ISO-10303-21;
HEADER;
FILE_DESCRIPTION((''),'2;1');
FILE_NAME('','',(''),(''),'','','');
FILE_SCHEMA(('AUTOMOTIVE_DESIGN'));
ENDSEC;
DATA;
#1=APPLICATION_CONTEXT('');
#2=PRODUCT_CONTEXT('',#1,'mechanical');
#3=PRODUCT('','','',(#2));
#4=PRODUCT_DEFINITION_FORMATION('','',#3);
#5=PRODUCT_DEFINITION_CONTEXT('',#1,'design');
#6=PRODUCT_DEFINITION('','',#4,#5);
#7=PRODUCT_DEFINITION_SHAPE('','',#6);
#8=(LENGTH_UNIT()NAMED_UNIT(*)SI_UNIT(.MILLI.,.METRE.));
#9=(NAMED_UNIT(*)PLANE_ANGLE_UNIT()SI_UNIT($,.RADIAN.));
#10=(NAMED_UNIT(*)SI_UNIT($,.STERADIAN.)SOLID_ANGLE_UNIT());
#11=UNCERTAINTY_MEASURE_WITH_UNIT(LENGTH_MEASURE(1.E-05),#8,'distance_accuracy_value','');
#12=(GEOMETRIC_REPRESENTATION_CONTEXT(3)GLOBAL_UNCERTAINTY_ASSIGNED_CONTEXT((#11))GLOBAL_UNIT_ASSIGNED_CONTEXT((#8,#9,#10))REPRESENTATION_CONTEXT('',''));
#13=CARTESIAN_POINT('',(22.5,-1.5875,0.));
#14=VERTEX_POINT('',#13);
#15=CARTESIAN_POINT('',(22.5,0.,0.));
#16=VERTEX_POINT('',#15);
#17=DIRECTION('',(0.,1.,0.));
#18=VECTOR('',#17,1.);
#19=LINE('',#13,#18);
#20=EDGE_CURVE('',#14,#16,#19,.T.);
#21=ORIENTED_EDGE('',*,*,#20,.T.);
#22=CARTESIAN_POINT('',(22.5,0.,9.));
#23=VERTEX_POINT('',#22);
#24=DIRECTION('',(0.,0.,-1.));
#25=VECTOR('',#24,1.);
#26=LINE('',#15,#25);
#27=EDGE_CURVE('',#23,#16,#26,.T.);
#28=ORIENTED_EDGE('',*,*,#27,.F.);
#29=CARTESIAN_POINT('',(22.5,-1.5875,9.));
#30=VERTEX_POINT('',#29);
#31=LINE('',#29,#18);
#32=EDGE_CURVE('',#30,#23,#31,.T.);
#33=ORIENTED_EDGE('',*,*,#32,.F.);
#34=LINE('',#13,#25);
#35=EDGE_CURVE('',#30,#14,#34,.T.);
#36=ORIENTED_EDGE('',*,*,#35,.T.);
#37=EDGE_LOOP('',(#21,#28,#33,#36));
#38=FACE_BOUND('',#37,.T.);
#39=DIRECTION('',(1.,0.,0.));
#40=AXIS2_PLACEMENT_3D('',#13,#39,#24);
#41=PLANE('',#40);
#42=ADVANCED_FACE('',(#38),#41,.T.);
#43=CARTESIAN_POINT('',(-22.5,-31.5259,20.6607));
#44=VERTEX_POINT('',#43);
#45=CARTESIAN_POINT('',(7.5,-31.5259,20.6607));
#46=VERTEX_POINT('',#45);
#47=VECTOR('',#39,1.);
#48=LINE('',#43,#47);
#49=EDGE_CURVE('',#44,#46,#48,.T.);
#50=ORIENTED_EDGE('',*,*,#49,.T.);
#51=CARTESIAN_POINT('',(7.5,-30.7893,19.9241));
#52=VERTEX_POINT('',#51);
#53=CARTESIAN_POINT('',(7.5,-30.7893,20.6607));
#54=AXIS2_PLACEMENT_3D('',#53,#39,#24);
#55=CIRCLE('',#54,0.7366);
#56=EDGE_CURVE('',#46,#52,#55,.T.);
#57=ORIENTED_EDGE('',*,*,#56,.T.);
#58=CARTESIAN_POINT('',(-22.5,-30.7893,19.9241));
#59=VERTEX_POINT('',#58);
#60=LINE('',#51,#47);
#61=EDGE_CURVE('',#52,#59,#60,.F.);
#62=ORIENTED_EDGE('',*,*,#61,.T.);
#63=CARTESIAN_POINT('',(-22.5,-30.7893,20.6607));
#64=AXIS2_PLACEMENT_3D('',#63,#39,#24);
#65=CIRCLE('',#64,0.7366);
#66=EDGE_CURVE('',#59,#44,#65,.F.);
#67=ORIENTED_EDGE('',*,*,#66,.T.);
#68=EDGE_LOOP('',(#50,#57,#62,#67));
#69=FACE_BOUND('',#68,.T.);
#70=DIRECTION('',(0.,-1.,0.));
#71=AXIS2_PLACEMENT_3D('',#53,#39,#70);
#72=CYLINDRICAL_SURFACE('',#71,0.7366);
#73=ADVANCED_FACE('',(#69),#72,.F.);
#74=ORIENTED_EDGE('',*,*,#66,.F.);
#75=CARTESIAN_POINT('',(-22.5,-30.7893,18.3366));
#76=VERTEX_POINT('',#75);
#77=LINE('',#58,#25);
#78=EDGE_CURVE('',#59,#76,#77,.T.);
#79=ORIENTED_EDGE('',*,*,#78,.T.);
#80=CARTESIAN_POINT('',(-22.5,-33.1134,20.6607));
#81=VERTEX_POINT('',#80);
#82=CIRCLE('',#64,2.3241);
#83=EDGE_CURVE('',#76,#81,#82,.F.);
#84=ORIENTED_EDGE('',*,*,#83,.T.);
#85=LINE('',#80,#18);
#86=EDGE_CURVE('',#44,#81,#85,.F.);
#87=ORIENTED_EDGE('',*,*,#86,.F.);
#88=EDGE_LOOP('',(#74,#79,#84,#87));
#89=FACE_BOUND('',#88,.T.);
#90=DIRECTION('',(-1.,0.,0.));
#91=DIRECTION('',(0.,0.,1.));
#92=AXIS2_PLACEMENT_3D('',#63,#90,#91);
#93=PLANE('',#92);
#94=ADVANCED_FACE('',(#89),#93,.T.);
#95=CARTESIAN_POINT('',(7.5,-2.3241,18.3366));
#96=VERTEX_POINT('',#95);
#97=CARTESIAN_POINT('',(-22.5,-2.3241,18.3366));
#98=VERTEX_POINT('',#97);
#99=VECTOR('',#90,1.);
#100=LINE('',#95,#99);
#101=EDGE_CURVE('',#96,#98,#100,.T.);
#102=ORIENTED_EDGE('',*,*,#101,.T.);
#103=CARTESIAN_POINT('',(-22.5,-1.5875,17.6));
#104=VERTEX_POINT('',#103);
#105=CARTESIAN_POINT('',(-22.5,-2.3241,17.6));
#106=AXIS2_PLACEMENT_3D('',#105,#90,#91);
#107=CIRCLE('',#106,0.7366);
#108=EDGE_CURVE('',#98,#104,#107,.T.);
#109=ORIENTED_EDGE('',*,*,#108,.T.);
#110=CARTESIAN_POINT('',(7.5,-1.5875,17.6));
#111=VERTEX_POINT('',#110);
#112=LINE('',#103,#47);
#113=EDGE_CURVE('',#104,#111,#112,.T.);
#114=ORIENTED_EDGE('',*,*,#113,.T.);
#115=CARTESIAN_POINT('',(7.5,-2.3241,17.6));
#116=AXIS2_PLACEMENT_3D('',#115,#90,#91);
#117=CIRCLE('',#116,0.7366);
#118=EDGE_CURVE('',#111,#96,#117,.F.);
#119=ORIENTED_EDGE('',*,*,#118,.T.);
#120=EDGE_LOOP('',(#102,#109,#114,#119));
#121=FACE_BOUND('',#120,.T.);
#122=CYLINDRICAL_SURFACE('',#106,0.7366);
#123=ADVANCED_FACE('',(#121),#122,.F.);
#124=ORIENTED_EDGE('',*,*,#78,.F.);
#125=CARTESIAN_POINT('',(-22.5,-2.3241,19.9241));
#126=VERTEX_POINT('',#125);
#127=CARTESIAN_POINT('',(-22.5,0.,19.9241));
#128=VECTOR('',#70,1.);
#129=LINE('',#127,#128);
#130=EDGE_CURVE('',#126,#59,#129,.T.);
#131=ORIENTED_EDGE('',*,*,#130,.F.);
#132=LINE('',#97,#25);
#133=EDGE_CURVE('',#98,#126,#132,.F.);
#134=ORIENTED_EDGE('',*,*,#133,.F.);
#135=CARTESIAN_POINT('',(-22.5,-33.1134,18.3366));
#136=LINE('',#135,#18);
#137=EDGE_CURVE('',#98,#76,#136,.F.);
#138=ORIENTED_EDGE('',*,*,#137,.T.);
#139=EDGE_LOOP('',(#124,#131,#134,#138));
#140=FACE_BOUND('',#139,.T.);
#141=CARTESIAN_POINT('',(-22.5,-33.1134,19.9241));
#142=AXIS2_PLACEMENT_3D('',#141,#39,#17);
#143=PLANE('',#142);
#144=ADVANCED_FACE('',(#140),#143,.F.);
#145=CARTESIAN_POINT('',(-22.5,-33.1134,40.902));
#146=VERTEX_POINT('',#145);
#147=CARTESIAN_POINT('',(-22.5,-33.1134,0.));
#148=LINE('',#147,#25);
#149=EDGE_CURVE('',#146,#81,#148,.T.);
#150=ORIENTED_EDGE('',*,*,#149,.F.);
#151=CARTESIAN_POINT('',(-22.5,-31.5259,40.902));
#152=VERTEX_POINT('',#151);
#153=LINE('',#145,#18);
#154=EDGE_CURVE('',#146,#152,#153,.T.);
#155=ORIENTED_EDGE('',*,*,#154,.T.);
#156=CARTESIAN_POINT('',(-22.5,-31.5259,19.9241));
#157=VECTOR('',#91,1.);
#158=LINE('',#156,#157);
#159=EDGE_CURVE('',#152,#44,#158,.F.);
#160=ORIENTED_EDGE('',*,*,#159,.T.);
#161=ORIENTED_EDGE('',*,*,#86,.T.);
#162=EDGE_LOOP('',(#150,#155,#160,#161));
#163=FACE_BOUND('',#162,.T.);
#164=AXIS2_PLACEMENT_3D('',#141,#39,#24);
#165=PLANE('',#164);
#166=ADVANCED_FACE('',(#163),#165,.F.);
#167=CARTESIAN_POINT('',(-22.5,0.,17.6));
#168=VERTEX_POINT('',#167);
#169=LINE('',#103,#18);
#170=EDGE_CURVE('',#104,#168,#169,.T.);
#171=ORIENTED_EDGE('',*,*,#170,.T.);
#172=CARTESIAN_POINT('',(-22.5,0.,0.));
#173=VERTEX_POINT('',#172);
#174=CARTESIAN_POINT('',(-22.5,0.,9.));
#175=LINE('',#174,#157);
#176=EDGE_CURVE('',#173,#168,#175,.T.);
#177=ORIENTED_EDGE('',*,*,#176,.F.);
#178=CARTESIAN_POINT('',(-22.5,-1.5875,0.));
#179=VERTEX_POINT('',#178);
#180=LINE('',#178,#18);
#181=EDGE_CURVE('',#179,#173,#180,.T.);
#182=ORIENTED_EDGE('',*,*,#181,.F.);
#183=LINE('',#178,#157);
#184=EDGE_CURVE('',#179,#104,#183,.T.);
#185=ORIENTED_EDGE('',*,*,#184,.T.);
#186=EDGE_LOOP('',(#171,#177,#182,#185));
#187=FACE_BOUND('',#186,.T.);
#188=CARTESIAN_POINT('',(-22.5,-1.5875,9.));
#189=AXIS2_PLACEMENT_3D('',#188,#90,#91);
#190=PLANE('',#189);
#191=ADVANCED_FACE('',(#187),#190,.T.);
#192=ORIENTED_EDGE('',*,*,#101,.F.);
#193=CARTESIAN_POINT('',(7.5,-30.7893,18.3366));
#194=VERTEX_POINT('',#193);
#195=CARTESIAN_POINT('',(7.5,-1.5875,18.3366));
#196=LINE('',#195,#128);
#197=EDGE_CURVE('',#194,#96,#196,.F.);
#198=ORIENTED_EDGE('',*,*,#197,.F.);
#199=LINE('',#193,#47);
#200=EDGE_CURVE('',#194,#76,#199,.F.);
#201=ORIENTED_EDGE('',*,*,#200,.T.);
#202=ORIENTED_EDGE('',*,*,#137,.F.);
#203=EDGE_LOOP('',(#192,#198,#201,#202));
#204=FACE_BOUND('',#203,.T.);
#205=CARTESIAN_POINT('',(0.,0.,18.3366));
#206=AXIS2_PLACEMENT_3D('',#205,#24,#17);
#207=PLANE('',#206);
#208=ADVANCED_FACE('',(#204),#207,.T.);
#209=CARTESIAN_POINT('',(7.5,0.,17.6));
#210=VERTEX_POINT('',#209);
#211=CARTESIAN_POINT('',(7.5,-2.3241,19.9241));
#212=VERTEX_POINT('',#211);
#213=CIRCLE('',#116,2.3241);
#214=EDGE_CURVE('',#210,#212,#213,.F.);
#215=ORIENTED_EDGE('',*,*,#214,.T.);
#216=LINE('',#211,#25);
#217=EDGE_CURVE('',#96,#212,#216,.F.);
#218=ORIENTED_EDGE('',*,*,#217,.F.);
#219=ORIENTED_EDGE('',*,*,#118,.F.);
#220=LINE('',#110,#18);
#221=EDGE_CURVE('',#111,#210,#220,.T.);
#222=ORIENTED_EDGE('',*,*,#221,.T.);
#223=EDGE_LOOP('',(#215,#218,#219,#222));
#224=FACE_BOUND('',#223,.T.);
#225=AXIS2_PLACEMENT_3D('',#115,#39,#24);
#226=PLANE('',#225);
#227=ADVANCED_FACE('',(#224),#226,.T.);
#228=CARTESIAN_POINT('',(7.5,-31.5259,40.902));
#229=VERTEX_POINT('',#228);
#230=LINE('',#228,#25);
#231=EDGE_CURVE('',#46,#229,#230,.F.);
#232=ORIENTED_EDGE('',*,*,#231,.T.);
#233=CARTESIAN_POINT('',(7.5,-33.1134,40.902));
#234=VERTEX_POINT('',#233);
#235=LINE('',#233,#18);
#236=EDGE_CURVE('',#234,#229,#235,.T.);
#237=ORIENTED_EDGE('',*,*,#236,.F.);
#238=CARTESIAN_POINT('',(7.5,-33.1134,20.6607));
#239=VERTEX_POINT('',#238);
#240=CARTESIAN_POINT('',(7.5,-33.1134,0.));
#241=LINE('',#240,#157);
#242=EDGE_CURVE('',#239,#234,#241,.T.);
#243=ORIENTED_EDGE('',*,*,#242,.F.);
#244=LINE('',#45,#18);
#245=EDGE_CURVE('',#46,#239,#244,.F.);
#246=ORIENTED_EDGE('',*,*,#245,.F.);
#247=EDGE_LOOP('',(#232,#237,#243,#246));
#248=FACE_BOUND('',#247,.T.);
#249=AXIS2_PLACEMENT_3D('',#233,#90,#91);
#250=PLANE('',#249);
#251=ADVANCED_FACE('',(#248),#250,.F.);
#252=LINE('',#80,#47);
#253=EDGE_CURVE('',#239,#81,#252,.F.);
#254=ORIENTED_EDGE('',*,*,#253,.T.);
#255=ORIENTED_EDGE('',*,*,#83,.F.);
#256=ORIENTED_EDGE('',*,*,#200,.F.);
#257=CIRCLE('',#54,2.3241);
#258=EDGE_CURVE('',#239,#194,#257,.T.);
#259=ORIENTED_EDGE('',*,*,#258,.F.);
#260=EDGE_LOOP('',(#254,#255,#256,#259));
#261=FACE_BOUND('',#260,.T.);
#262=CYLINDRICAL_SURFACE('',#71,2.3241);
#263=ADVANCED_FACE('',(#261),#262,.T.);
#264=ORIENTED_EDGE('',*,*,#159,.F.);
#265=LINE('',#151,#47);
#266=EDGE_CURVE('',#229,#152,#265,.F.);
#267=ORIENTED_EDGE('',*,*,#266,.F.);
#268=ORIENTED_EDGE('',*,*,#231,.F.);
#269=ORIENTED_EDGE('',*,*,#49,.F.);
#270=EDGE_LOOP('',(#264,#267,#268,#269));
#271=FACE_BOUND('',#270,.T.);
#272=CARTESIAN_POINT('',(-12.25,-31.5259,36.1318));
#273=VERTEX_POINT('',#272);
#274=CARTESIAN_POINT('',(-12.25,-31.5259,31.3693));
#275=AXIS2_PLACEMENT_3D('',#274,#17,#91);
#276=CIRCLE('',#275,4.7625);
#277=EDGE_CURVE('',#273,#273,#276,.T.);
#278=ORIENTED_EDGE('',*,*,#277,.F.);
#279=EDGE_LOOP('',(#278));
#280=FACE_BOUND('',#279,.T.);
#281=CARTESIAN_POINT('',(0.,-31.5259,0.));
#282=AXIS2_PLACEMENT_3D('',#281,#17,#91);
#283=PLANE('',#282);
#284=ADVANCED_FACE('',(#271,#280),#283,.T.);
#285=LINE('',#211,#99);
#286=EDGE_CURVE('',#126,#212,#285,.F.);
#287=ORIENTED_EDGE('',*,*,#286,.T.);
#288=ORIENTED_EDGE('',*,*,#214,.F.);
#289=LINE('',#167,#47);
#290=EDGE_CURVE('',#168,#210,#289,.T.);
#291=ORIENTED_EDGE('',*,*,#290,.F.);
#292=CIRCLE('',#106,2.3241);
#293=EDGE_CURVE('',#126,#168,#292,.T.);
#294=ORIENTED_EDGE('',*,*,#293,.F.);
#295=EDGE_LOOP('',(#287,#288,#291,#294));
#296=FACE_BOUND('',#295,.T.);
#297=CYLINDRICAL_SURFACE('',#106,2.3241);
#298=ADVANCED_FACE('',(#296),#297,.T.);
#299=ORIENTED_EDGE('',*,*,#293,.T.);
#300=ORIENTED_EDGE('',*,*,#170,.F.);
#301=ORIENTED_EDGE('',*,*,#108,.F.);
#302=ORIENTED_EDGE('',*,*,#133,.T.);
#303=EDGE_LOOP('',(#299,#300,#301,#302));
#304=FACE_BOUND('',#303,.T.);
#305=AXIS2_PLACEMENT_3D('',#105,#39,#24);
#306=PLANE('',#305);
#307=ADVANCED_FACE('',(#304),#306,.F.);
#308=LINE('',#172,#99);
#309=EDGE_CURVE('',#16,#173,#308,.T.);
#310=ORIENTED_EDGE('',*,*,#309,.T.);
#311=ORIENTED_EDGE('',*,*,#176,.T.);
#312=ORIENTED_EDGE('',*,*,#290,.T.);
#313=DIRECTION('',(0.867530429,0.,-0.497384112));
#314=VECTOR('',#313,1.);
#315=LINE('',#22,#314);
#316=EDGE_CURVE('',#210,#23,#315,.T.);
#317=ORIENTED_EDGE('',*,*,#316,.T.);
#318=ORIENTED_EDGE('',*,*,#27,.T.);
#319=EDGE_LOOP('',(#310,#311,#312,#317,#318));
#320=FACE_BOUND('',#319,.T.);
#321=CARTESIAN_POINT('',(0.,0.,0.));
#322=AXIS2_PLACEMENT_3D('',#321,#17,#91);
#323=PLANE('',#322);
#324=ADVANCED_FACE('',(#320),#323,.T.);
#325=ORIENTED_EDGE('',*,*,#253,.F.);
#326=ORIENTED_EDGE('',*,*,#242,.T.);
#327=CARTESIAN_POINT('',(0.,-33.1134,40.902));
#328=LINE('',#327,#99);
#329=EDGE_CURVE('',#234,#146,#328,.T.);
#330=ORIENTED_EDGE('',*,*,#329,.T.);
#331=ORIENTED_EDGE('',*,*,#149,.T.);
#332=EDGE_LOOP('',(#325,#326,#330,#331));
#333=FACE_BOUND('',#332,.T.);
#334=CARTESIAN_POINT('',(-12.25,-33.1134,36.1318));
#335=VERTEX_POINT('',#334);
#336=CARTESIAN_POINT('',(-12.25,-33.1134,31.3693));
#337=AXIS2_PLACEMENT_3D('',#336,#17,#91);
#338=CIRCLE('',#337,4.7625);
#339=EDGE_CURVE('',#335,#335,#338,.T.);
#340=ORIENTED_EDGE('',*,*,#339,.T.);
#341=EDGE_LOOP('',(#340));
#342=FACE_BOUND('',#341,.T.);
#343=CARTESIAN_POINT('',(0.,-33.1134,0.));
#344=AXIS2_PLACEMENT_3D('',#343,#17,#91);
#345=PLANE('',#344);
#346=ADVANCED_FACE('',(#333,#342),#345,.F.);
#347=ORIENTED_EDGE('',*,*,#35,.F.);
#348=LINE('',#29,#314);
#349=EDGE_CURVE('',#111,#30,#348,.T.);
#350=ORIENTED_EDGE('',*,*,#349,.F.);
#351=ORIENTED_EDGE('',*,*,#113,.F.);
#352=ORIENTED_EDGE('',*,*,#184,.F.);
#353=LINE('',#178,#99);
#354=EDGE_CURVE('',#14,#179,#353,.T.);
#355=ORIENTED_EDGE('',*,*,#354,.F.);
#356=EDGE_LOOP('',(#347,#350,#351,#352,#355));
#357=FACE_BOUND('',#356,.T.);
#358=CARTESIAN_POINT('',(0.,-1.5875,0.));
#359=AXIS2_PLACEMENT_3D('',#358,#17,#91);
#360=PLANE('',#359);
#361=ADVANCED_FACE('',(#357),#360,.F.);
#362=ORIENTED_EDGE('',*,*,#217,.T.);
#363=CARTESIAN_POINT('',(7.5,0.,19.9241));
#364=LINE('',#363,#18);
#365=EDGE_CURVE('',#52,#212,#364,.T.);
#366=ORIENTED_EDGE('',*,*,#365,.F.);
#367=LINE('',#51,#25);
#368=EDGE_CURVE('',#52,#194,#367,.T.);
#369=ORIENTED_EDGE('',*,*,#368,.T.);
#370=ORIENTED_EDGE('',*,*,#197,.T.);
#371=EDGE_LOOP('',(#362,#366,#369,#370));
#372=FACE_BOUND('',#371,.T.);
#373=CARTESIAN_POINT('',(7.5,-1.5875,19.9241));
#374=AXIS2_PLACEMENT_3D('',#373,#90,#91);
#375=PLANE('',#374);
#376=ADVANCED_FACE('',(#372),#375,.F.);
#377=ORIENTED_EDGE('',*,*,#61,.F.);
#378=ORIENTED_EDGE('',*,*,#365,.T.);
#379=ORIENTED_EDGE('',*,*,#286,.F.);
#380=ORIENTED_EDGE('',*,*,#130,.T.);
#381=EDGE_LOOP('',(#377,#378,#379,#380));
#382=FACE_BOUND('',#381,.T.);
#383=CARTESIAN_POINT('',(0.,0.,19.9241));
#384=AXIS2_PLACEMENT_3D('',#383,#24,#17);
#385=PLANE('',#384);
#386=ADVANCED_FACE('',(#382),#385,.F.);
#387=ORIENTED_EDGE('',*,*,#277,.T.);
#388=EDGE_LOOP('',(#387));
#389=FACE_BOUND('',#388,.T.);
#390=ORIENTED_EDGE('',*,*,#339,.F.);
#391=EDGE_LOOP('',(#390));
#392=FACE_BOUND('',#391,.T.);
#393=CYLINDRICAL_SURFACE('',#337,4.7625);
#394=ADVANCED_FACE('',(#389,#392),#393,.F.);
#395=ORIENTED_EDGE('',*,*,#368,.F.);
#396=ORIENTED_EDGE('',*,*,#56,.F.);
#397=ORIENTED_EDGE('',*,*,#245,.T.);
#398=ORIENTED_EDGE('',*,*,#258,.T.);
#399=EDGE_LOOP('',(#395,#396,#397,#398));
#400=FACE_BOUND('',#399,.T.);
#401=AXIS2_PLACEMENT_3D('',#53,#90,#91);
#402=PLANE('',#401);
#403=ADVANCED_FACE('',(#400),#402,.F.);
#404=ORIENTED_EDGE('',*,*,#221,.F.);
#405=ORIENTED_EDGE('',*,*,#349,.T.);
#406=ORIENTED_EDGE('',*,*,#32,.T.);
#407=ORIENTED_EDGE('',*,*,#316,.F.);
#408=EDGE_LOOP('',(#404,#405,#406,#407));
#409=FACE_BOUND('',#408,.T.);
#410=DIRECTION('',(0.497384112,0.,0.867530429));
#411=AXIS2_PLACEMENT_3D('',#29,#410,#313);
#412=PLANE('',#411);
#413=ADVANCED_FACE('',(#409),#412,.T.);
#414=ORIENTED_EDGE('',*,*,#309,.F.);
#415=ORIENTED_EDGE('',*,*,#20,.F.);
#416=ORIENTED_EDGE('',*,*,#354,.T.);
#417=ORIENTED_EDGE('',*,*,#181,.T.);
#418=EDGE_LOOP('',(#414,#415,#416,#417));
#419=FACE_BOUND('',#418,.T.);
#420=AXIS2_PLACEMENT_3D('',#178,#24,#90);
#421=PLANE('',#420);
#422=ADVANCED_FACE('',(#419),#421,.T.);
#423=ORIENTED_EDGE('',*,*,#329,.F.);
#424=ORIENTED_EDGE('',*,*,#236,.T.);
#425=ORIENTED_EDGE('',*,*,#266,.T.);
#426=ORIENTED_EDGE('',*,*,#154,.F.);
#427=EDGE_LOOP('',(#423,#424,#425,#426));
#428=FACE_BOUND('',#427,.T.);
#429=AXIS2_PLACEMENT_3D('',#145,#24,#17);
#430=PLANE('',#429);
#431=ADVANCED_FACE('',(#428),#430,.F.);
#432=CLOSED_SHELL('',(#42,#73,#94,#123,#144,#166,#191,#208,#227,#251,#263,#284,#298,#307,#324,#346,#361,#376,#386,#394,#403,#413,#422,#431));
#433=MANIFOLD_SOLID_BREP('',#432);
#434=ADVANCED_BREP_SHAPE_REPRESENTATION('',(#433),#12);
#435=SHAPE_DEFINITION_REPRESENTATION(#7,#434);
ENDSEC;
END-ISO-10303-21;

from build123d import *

# Parameters (mm, degrees)
STACK_CONNECTION_DEPTH       = 1.5875
EDGE_FLANGE1_DEPTH           = 30
EDGE_FLANGE2_STRIP_W         = 7.8232
EDGE_FLANGE2_STRIP_H         = 1.5875
EDGE_FLANGE2_STRIP_CUT_DEPTH = 30
EDGE_FLANGE2_DEPTH           = 30
SKETCH13_R                   = 4.7625
CUT_EXTRUDE1_DEPTH           = 57.330329085


# Sheet-metal steps are written as plain solids
with BuildPart() as part:
    # Sketch2 → Stack Connection (new body)
    with BuildSketch(Plane(origin=(0, 0, 0), x_dir=(1, 0, 0), z_dir=(0, 1, 0))):
        Polygon((-22.5, 0), (22.5, 0), (22.5, -9), (7.5, -17.6), (-22.5, -17.6), (-22.5, -9), align=None)
    extrude(amount=-STACK_CONNECTION_DEPTH)

    # Edge-Flange1 section (across the edge) → Edge-Flange1 (add)
    with BuildSketch(Plane(origin=(7.5, -1.5875, 18.3366), x_dir=(0, 0, -1), z_dir=(-1, 0, 0))):
        with BuildLine():
            Line((-1.5875, 0.7366), (-1.5875, 31.5259))
            Line((-1.5875, 31.5259), (0, 31.5259))
            Line((0, 31.5259), (0, 0.7366))
            ThreePointArc((0, 0.7366), (0.215745145, 0.215745145), (0.7366, 0))
            Line((0.7366, 0), (0.7366, -1.5875))
            ThreePointArc((0.7366, -1.5875), (-0.90678687, -0.90678687), (-1.5875, 0.7366))
        make_face()
    extrude(amount=EDGE_FLANGE1_DEPTH)

    # Edge-Flange2 strip (across the edge) → Edge-Flange2 strip cut (cut)
    with BuildSketch(Plane(origin=(-22.5, -33.1134, 19.9241), x_dir=(0, 1, 0), z_dir=(1, 0, 0))):
        with Locations((-1.5875, -0.79375)):
            Rectangle(EDGE_FLANGE2_STRIP_W, EDGE_FLANGE2_STRIP_H)
    extrude(amount=EDGE_FLANGE2_STRIP_CUT_DEPTH, mode=Mode.SUBTRACT)

    # Edge-Flange2 section (across the edge) → Edge-Flange2 (add)
    with BuildSketch(Plane(origin=(-22.5, -33.1134, 19.9241), x_dir=(0, 1, 0), z_dir=(1, 0, 0))):
        with BuildLine():
            Line((0, 0.7366), (0, 20.9779))
            Line((0, 20.9779), (1.5875, 20.9779))
            Line((1.5875, 20.9779), (1.5875, 0.7366))
            ThreePointArc((1.5875, 0.7366), (1.803245145, 0.215745145), (2.3241, 0))
            Line((2.3241, 0), (2.3241, -1.5875))
            ThreePointArc((2.3241, -1.5875), (0.68071313, -0.90678687), (0, 0.7366))
        make_face()
    extrude(amount=EDGE_FLANGE2_DEPTH)

    # Sketch13 → Cut-Extrude1 (cut, through all)
    with BuildSketch(Plane(origin=(0, -31.5259, 0), x_dir=(1, 0, 0), z_dir=(0, 1, 0))):
        with Locations(Location((-12.25, -31.3693, 0), (0, 0, 270))):
            Circle(SKETCH13_R)
    extrude(amount=-CUT_EXTRUDE1_DEPTH, mode=Mode.SUBTRACT)


solid = part.part
